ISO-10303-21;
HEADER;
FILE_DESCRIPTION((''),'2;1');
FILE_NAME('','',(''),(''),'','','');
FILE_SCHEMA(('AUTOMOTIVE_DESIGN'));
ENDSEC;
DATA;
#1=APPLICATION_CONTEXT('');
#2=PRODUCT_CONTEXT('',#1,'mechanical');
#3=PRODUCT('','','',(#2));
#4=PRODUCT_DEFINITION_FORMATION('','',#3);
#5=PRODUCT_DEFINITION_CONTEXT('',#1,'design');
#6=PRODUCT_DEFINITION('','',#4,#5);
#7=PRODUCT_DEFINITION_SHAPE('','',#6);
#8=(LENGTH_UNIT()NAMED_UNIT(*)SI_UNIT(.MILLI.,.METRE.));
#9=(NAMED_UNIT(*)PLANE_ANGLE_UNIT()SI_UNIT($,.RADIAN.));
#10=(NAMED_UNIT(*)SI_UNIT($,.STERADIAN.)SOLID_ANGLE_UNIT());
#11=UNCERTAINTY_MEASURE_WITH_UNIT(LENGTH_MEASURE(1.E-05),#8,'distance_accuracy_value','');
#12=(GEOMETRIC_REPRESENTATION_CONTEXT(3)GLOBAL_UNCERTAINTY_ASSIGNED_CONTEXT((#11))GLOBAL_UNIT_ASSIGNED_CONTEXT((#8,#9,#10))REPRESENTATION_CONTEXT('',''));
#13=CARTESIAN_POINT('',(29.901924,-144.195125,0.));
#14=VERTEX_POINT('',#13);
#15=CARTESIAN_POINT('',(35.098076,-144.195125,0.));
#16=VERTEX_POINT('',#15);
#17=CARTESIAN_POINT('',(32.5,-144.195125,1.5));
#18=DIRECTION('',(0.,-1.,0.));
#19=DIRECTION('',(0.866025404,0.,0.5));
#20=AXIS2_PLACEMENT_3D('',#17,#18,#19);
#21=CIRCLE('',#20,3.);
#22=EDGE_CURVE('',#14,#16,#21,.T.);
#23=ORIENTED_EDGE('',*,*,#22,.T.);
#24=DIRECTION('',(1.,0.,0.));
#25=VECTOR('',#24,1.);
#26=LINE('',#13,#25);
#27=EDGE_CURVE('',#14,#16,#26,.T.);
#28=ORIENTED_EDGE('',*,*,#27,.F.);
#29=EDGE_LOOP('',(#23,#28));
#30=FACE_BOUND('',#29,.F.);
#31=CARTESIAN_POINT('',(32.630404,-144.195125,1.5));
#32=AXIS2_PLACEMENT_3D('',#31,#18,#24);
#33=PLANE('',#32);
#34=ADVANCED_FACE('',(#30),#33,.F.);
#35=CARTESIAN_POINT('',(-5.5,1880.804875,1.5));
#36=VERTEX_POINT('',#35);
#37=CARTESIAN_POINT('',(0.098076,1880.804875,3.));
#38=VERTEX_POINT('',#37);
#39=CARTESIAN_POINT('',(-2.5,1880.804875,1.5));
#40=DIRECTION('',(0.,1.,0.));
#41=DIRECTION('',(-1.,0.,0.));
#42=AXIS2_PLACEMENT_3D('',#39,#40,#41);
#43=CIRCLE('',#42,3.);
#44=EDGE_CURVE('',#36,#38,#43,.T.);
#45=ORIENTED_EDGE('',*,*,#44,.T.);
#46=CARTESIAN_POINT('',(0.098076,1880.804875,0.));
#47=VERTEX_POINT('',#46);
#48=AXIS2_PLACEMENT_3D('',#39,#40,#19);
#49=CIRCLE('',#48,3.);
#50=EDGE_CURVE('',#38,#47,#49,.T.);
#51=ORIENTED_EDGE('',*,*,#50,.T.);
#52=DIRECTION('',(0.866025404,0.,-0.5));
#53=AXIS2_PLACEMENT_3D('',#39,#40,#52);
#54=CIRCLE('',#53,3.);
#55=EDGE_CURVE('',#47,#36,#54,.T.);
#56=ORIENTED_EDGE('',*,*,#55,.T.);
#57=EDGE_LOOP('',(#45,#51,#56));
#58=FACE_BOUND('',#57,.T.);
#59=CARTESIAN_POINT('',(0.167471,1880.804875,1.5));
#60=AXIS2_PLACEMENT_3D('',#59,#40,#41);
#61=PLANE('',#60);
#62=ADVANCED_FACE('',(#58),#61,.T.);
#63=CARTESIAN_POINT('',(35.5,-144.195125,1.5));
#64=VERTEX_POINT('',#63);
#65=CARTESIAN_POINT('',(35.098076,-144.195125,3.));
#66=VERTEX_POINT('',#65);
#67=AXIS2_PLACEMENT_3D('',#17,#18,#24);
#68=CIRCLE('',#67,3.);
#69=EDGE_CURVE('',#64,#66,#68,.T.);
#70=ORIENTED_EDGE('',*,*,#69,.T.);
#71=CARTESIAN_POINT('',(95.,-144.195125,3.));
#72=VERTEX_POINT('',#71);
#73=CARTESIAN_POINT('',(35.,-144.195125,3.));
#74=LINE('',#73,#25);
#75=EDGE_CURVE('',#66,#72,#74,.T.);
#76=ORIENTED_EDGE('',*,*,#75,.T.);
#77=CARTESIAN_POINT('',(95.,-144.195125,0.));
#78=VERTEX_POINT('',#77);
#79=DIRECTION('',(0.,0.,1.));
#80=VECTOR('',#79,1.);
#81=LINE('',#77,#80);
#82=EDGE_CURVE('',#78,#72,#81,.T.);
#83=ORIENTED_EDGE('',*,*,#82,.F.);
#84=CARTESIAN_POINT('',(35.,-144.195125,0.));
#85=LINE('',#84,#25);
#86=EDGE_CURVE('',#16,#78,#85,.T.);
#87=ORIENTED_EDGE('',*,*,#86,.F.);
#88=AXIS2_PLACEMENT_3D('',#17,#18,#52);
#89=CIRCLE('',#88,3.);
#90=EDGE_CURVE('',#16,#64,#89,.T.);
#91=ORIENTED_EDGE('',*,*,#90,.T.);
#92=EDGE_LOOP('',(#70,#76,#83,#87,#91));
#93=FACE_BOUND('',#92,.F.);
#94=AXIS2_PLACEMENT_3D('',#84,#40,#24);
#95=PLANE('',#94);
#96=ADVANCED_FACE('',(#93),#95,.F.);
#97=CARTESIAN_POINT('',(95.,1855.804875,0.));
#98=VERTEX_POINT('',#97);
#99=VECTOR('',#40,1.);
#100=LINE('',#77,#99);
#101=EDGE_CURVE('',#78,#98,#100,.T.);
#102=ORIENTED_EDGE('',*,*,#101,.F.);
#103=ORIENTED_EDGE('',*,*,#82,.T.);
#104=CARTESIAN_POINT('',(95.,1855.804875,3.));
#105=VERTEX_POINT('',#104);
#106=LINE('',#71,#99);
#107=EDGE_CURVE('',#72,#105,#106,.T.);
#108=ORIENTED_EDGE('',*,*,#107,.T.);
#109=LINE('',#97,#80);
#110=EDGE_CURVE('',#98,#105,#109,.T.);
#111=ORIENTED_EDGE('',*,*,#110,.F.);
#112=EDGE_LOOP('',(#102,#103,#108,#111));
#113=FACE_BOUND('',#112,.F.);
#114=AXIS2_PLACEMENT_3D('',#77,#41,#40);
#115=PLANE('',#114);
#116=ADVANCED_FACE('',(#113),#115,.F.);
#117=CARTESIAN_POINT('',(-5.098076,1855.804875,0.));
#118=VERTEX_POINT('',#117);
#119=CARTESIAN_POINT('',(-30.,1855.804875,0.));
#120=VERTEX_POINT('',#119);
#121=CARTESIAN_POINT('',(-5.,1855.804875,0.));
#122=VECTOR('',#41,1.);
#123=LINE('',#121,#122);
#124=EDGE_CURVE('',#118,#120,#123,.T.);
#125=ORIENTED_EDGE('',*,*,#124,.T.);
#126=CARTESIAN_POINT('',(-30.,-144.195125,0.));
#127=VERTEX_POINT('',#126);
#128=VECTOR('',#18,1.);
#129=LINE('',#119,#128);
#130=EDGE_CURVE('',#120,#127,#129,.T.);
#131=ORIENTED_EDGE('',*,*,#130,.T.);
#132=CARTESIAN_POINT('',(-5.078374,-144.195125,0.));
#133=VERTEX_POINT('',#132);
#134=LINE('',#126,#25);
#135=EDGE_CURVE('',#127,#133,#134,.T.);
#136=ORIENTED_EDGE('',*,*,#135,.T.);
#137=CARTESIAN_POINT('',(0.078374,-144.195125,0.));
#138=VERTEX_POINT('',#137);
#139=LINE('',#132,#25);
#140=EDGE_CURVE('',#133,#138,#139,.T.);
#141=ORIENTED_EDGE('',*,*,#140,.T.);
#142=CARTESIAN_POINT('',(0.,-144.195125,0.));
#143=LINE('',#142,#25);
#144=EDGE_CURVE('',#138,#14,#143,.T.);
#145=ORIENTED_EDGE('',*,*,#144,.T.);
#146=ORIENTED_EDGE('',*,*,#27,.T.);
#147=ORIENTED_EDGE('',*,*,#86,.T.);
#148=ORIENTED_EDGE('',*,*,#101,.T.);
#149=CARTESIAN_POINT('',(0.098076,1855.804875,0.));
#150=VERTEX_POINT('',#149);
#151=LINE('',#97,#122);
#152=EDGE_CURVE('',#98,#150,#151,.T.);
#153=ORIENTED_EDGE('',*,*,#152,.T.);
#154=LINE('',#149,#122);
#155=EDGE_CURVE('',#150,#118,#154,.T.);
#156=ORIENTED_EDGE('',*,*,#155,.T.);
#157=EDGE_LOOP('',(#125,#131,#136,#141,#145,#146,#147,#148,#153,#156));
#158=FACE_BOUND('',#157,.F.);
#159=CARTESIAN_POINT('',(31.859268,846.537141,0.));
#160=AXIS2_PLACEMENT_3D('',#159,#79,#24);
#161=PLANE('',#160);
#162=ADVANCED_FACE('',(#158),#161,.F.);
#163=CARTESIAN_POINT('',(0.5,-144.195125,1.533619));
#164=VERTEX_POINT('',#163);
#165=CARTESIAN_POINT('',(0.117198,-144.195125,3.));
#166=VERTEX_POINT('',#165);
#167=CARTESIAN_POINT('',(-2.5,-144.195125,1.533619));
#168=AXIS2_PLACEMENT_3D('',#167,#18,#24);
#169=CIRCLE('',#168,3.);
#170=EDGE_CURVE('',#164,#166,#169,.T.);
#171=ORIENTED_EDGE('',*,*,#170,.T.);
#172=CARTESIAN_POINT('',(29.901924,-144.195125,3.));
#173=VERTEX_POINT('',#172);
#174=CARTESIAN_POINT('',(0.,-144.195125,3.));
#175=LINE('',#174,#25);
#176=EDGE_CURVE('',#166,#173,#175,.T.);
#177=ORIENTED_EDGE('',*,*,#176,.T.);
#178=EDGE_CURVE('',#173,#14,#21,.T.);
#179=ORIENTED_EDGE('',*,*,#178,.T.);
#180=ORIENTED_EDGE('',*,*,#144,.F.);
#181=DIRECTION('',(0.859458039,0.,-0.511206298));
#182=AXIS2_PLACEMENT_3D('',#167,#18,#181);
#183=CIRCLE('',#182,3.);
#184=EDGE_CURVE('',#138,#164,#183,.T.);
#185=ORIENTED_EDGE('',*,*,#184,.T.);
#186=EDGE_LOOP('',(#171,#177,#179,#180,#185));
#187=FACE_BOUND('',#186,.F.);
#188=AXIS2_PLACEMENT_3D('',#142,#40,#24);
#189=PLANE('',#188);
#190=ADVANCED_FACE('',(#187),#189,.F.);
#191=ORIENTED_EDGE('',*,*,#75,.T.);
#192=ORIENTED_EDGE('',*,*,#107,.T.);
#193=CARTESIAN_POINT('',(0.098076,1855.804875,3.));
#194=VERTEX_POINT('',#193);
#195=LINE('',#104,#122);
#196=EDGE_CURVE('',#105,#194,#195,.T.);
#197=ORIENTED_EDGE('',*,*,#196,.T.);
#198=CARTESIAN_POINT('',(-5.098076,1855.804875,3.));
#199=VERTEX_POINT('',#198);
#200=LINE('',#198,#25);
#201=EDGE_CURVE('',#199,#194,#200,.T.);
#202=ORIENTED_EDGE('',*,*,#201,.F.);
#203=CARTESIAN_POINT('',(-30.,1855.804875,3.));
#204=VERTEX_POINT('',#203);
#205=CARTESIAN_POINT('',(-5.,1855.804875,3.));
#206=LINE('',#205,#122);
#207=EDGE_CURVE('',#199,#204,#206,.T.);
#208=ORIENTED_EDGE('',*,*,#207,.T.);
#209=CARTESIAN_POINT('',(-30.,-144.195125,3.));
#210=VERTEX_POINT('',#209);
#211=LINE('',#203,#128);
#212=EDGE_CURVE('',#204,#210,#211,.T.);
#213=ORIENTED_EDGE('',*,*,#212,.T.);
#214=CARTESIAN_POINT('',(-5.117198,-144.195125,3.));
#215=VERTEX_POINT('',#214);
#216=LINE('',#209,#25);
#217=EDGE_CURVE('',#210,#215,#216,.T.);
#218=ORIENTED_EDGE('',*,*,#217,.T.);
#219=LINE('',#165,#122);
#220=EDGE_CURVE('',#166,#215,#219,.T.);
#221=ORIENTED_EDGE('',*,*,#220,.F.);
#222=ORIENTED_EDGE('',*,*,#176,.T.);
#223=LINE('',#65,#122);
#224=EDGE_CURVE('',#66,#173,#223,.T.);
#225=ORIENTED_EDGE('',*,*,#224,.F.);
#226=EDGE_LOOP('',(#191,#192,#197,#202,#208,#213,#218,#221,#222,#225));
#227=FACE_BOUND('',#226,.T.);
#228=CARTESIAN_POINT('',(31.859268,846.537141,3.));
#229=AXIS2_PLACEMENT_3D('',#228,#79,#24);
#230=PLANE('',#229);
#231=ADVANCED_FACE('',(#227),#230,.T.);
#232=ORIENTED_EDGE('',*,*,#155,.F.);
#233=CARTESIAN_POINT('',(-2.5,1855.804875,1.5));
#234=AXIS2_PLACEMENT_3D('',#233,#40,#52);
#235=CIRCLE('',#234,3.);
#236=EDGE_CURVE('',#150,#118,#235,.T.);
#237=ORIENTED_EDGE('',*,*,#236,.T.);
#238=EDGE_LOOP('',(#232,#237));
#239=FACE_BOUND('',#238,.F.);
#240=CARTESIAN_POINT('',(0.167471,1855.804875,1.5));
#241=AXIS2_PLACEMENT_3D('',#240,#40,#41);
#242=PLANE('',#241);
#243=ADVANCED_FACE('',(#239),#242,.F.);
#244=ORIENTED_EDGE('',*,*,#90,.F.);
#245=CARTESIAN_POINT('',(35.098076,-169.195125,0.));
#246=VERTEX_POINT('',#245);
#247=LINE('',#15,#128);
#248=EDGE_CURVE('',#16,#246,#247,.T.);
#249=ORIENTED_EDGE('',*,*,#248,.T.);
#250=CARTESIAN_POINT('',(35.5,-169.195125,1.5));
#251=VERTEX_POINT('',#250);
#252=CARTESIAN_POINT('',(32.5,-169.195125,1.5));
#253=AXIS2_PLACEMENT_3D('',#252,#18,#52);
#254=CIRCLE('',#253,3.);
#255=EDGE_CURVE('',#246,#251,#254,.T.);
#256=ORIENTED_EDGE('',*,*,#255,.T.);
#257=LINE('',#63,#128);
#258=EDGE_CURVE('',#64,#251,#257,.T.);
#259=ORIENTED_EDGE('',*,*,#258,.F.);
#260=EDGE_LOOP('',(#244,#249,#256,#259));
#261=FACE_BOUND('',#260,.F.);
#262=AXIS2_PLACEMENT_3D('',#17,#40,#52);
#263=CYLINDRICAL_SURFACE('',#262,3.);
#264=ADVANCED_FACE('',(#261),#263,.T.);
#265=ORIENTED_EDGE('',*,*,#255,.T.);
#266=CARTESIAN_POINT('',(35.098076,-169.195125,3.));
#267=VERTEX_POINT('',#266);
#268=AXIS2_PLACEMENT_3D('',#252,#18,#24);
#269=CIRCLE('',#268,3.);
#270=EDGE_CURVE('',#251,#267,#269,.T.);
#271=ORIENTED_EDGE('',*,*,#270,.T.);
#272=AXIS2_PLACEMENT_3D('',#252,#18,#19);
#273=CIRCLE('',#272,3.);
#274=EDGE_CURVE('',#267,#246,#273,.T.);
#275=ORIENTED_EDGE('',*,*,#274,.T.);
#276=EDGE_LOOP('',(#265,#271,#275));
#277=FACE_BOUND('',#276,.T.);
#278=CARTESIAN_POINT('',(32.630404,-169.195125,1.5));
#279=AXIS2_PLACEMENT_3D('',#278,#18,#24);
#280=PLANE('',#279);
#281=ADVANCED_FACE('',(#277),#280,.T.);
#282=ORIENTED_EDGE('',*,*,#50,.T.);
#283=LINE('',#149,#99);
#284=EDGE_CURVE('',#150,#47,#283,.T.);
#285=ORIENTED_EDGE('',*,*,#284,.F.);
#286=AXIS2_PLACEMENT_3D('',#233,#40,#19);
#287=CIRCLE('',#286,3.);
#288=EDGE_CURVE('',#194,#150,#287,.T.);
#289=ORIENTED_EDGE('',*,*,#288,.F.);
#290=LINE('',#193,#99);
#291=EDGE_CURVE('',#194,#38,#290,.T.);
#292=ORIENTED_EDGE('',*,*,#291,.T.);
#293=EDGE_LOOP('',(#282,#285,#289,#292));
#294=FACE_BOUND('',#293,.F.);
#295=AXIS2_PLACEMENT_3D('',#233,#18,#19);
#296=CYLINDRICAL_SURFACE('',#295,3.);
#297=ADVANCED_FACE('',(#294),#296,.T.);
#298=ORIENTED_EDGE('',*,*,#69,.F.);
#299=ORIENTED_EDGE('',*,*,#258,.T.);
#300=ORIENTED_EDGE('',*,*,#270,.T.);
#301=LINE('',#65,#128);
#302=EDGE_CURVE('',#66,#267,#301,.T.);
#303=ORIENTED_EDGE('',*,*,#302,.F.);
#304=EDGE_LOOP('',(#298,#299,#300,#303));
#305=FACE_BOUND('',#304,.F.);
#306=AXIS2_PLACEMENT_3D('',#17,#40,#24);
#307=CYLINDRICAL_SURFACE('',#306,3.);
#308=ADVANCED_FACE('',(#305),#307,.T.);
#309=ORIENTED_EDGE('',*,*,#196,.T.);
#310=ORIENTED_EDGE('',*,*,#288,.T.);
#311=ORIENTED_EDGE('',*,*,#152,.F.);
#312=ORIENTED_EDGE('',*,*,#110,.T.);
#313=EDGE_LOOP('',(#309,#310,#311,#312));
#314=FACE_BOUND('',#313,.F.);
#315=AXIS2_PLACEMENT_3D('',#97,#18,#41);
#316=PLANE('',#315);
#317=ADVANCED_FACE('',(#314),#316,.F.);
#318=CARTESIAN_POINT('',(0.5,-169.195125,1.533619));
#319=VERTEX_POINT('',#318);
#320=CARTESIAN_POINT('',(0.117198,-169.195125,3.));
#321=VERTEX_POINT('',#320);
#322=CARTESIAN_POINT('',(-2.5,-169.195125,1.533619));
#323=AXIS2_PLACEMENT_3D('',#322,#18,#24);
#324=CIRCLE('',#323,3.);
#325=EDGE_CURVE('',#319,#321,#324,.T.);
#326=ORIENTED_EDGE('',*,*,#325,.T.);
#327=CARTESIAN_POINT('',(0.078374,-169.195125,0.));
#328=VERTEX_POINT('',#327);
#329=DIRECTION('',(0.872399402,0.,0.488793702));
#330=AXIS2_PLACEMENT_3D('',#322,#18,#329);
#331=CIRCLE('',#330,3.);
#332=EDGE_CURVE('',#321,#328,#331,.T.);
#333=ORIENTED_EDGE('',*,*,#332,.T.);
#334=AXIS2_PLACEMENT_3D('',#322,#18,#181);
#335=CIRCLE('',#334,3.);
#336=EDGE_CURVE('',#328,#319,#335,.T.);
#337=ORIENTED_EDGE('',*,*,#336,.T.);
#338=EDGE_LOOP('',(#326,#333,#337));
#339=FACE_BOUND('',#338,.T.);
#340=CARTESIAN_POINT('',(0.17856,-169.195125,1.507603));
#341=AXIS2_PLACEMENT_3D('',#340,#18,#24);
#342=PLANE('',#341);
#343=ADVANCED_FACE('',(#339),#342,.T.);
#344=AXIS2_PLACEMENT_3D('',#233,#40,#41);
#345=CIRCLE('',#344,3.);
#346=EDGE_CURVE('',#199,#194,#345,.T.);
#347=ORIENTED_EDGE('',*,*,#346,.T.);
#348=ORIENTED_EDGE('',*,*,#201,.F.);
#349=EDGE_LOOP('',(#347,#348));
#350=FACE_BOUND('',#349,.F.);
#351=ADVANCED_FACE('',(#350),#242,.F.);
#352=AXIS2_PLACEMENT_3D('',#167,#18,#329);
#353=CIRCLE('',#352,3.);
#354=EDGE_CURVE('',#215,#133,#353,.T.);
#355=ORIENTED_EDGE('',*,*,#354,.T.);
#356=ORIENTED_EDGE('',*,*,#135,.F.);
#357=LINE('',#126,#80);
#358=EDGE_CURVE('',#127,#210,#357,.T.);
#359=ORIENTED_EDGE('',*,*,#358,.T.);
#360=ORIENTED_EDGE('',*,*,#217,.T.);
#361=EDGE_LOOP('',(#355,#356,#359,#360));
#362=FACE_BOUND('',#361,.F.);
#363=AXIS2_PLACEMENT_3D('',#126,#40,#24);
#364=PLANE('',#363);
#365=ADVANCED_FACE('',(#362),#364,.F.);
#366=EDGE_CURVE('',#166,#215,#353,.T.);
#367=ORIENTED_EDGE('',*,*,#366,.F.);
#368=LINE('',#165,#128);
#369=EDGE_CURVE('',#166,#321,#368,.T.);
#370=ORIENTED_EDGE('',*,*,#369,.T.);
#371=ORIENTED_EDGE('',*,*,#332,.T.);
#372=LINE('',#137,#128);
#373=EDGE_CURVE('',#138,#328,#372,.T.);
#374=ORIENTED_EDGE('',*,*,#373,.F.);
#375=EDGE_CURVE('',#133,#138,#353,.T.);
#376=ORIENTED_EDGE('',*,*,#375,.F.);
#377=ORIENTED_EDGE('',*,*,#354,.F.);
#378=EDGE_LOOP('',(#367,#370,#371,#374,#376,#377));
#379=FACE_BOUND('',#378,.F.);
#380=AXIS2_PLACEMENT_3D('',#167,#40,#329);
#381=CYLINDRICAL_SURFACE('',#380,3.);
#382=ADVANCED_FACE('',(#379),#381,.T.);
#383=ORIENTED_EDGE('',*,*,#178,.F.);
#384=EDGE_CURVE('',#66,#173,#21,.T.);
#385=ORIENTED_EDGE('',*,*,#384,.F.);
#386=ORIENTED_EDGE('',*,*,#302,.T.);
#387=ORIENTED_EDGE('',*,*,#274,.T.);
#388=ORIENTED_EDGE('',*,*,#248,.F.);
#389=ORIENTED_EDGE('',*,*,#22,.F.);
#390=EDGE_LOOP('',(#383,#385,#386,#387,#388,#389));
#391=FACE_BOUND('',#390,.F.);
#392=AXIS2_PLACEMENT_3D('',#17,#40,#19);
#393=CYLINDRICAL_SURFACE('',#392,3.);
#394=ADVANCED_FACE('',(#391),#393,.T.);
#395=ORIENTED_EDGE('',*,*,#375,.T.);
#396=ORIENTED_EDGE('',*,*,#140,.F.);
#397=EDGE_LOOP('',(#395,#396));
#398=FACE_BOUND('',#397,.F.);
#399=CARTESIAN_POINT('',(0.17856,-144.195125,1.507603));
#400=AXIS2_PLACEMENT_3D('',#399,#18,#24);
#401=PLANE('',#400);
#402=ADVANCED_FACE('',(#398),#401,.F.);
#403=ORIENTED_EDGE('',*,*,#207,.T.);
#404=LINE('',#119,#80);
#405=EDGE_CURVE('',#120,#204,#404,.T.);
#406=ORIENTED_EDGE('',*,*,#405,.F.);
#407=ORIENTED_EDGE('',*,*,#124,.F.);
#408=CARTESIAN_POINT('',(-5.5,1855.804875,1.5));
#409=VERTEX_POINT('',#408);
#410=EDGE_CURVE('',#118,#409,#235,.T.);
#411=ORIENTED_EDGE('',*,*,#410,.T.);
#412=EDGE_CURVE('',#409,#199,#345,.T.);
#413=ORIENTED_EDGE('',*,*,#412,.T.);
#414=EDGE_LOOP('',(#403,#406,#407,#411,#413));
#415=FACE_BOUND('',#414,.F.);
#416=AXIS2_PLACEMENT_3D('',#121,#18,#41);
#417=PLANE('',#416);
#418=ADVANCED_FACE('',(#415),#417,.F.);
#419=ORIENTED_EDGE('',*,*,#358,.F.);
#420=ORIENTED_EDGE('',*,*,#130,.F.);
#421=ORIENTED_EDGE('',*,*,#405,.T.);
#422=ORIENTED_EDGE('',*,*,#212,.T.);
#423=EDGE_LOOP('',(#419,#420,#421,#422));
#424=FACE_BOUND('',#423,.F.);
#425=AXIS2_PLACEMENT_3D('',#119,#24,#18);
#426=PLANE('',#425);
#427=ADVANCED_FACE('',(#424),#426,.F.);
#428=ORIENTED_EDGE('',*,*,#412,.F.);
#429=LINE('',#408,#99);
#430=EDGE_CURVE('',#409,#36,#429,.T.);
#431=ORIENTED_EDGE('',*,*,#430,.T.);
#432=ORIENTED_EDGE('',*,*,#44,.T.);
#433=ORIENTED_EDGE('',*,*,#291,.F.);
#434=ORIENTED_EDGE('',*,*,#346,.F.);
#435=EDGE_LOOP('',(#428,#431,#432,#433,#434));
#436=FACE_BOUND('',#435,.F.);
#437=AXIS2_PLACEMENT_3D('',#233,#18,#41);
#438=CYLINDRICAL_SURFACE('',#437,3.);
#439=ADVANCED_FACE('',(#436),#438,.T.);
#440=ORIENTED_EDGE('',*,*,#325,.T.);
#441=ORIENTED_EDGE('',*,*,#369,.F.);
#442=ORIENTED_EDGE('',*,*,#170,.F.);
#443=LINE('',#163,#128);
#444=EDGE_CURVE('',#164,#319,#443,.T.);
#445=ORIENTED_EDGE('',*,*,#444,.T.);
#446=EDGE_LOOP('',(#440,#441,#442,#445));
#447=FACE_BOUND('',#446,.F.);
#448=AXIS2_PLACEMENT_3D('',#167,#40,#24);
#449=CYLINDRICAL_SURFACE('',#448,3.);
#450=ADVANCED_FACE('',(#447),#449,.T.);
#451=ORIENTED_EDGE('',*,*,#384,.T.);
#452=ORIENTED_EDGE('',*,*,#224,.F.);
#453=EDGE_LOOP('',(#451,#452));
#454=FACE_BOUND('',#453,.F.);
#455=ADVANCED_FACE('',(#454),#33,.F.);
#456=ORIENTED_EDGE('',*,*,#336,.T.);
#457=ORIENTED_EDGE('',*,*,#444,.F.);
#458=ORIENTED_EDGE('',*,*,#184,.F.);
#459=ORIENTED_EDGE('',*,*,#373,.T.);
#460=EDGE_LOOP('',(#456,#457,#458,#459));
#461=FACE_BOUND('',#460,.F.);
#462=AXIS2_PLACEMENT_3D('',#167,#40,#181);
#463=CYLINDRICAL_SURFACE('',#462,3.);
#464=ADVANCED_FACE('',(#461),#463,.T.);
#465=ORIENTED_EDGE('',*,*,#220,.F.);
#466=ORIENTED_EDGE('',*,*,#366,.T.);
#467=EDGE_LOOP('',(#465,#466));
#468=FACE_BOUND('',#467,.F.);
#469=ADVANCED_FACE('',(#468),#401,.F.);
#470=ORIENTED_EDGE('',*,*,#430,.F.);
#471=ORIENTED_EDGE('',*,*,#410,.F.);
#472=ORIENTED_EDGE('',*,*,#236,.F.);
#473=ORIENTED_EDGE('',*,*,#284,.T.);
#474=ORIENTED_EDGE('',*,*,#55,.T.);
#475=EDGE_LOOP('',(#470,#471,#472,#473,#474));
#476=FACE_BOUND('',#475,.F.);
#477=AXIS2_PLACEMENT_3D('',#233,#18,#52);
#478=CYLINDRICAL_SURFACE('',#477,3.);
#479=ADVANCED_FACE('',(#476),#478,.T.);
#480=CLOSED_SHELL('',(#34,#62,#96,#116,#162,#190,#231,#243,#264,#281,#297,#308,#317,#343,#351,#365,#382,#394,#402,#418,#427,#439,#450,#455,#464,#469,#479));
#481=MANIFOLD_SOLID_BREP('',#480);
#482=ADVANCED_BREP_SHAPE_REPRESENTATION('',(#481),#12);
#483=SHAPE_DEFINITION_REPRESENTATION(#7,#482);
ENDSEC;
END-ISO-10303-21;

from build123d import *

# Parameters (mm, degrees)
F1_DEPTH = 3
F3_DEPTH = 25
F5_DEPTH = 25
F7_DEPTH = 25


# Not quite as in the source:
# - a feature names something its author has since deleted; it is built from what else it names


with BuildPart() as f1:
    # F0 (on Top) → F1 (new body)
    with BuildSketch(Plane.XY):
        Polygon((-5, 1855.804875493), (-30, 1855.804875493), (-30, -144.195124507), (-5, -144.195124507), (-5, -164.195124507), (0, -164.195124507), (0, -144.195124507), (30, -144.195124507), (30, -164.195124507), (35, -164.195124507), (35, -144.195124507), (95, -144.195124507), (95, 1855.804875493), (0, 1855.804875493), (0, 1875.804875493), (-5, 1875.804875493), align=None)
    extrude(amount=F1_DEPTH)

    # F2 (on face) → F3 (join)
    with BuildSketch(Plane.XZ.offset(144.195124507)):
        with BuildLine():
            Line((35, 3), (35.0980762114, 3))
            ThreePointArc((35.0980762114, 3), (29.5, 1.5), (35.0980762114, 0))
            Line((35.0980762114, 0), (35, 0))
            Line((35, 0), (35, 3))
        make_face()
        with BuildLine():
            ThreePointArc((35.0980762114, 0), (35.3977774789, 0.7235428647), (35.5, 1.5))
            ThreePointArc((35.5, 1.5), (35.3977774789, 2.2764571353), (35.0980762114, 3))
            Line((35.0980762114, 3), (35, 3))
            Line((35, 3), (35, 0))
            Line((35, 0), (35.0980762114, 0))
        make_face()
    extrude(amount=F3_DEPTH)

    # F4 (on face) → F5 (join)
    with BuildSketch(Plane(origin=(0, 1855.804875493, 0), x_dir=(-1, 0, 0), z_dir=(0, 1, 0))):
        with BuildLine():
            Line((0, 3), (-0.0980762114, 3))
            ThreePointArc((-0.0980762114, 3), (-0.5, 1.5), (-0.0980762114, 0))
            Line((-0.0980762114, 0), (0, 0))
            Line((0, 0), (0, 3))
        make_face()
        with BuildLine():
            ThreePointArc((-0.0980762114, 0), (3.2764571353, -1.3977774789), (5.5, 1.5))
            ThreePointArc((5.5, 1.5), (3.2764571353, 4.3977774789), (-0.0980762114, 3))
            Line((-0.0980762114, 3), (0, 3))
            Line((0, 3), (0, 0))
            Line((0, 0), (-0.0980762114, 0))
        make_face()
    extrude(amount=F5_DEPTH)

    # F6 (on face) → F7 (join)
    with BuildSketch(Plane.XZ.offset(144.195124507)):
        with BuildLine():
            ThreePointArc((0.0783741164, 0), (0.3926737069, 0.7383586703), (0.5, 1.5336188953))
            ThreePointArc((0.5, 1.5336188953), (0.4027223964, 2.2913805262), (0.1171982072, 3))
            Line((0.1171982072, 3), (0, 3))
            Line((0, 3), (0, 0))
            Line((0, 0), (0.0783741164, 0))
        make_face()
        with BuildLine():
            Line((0, 3), (0.1171982072, 3))
            ThreePointArc((0.1171982072, 3), (-5.4997488132, 1.5724397355), (0.0783741164, 0))
            Line((0.0783741164, 0), (0, 0))
            Line((0, 0), (0, 3))
        make_face()
    extrude(amount=F7_DEPTH)


solid = f1.part
